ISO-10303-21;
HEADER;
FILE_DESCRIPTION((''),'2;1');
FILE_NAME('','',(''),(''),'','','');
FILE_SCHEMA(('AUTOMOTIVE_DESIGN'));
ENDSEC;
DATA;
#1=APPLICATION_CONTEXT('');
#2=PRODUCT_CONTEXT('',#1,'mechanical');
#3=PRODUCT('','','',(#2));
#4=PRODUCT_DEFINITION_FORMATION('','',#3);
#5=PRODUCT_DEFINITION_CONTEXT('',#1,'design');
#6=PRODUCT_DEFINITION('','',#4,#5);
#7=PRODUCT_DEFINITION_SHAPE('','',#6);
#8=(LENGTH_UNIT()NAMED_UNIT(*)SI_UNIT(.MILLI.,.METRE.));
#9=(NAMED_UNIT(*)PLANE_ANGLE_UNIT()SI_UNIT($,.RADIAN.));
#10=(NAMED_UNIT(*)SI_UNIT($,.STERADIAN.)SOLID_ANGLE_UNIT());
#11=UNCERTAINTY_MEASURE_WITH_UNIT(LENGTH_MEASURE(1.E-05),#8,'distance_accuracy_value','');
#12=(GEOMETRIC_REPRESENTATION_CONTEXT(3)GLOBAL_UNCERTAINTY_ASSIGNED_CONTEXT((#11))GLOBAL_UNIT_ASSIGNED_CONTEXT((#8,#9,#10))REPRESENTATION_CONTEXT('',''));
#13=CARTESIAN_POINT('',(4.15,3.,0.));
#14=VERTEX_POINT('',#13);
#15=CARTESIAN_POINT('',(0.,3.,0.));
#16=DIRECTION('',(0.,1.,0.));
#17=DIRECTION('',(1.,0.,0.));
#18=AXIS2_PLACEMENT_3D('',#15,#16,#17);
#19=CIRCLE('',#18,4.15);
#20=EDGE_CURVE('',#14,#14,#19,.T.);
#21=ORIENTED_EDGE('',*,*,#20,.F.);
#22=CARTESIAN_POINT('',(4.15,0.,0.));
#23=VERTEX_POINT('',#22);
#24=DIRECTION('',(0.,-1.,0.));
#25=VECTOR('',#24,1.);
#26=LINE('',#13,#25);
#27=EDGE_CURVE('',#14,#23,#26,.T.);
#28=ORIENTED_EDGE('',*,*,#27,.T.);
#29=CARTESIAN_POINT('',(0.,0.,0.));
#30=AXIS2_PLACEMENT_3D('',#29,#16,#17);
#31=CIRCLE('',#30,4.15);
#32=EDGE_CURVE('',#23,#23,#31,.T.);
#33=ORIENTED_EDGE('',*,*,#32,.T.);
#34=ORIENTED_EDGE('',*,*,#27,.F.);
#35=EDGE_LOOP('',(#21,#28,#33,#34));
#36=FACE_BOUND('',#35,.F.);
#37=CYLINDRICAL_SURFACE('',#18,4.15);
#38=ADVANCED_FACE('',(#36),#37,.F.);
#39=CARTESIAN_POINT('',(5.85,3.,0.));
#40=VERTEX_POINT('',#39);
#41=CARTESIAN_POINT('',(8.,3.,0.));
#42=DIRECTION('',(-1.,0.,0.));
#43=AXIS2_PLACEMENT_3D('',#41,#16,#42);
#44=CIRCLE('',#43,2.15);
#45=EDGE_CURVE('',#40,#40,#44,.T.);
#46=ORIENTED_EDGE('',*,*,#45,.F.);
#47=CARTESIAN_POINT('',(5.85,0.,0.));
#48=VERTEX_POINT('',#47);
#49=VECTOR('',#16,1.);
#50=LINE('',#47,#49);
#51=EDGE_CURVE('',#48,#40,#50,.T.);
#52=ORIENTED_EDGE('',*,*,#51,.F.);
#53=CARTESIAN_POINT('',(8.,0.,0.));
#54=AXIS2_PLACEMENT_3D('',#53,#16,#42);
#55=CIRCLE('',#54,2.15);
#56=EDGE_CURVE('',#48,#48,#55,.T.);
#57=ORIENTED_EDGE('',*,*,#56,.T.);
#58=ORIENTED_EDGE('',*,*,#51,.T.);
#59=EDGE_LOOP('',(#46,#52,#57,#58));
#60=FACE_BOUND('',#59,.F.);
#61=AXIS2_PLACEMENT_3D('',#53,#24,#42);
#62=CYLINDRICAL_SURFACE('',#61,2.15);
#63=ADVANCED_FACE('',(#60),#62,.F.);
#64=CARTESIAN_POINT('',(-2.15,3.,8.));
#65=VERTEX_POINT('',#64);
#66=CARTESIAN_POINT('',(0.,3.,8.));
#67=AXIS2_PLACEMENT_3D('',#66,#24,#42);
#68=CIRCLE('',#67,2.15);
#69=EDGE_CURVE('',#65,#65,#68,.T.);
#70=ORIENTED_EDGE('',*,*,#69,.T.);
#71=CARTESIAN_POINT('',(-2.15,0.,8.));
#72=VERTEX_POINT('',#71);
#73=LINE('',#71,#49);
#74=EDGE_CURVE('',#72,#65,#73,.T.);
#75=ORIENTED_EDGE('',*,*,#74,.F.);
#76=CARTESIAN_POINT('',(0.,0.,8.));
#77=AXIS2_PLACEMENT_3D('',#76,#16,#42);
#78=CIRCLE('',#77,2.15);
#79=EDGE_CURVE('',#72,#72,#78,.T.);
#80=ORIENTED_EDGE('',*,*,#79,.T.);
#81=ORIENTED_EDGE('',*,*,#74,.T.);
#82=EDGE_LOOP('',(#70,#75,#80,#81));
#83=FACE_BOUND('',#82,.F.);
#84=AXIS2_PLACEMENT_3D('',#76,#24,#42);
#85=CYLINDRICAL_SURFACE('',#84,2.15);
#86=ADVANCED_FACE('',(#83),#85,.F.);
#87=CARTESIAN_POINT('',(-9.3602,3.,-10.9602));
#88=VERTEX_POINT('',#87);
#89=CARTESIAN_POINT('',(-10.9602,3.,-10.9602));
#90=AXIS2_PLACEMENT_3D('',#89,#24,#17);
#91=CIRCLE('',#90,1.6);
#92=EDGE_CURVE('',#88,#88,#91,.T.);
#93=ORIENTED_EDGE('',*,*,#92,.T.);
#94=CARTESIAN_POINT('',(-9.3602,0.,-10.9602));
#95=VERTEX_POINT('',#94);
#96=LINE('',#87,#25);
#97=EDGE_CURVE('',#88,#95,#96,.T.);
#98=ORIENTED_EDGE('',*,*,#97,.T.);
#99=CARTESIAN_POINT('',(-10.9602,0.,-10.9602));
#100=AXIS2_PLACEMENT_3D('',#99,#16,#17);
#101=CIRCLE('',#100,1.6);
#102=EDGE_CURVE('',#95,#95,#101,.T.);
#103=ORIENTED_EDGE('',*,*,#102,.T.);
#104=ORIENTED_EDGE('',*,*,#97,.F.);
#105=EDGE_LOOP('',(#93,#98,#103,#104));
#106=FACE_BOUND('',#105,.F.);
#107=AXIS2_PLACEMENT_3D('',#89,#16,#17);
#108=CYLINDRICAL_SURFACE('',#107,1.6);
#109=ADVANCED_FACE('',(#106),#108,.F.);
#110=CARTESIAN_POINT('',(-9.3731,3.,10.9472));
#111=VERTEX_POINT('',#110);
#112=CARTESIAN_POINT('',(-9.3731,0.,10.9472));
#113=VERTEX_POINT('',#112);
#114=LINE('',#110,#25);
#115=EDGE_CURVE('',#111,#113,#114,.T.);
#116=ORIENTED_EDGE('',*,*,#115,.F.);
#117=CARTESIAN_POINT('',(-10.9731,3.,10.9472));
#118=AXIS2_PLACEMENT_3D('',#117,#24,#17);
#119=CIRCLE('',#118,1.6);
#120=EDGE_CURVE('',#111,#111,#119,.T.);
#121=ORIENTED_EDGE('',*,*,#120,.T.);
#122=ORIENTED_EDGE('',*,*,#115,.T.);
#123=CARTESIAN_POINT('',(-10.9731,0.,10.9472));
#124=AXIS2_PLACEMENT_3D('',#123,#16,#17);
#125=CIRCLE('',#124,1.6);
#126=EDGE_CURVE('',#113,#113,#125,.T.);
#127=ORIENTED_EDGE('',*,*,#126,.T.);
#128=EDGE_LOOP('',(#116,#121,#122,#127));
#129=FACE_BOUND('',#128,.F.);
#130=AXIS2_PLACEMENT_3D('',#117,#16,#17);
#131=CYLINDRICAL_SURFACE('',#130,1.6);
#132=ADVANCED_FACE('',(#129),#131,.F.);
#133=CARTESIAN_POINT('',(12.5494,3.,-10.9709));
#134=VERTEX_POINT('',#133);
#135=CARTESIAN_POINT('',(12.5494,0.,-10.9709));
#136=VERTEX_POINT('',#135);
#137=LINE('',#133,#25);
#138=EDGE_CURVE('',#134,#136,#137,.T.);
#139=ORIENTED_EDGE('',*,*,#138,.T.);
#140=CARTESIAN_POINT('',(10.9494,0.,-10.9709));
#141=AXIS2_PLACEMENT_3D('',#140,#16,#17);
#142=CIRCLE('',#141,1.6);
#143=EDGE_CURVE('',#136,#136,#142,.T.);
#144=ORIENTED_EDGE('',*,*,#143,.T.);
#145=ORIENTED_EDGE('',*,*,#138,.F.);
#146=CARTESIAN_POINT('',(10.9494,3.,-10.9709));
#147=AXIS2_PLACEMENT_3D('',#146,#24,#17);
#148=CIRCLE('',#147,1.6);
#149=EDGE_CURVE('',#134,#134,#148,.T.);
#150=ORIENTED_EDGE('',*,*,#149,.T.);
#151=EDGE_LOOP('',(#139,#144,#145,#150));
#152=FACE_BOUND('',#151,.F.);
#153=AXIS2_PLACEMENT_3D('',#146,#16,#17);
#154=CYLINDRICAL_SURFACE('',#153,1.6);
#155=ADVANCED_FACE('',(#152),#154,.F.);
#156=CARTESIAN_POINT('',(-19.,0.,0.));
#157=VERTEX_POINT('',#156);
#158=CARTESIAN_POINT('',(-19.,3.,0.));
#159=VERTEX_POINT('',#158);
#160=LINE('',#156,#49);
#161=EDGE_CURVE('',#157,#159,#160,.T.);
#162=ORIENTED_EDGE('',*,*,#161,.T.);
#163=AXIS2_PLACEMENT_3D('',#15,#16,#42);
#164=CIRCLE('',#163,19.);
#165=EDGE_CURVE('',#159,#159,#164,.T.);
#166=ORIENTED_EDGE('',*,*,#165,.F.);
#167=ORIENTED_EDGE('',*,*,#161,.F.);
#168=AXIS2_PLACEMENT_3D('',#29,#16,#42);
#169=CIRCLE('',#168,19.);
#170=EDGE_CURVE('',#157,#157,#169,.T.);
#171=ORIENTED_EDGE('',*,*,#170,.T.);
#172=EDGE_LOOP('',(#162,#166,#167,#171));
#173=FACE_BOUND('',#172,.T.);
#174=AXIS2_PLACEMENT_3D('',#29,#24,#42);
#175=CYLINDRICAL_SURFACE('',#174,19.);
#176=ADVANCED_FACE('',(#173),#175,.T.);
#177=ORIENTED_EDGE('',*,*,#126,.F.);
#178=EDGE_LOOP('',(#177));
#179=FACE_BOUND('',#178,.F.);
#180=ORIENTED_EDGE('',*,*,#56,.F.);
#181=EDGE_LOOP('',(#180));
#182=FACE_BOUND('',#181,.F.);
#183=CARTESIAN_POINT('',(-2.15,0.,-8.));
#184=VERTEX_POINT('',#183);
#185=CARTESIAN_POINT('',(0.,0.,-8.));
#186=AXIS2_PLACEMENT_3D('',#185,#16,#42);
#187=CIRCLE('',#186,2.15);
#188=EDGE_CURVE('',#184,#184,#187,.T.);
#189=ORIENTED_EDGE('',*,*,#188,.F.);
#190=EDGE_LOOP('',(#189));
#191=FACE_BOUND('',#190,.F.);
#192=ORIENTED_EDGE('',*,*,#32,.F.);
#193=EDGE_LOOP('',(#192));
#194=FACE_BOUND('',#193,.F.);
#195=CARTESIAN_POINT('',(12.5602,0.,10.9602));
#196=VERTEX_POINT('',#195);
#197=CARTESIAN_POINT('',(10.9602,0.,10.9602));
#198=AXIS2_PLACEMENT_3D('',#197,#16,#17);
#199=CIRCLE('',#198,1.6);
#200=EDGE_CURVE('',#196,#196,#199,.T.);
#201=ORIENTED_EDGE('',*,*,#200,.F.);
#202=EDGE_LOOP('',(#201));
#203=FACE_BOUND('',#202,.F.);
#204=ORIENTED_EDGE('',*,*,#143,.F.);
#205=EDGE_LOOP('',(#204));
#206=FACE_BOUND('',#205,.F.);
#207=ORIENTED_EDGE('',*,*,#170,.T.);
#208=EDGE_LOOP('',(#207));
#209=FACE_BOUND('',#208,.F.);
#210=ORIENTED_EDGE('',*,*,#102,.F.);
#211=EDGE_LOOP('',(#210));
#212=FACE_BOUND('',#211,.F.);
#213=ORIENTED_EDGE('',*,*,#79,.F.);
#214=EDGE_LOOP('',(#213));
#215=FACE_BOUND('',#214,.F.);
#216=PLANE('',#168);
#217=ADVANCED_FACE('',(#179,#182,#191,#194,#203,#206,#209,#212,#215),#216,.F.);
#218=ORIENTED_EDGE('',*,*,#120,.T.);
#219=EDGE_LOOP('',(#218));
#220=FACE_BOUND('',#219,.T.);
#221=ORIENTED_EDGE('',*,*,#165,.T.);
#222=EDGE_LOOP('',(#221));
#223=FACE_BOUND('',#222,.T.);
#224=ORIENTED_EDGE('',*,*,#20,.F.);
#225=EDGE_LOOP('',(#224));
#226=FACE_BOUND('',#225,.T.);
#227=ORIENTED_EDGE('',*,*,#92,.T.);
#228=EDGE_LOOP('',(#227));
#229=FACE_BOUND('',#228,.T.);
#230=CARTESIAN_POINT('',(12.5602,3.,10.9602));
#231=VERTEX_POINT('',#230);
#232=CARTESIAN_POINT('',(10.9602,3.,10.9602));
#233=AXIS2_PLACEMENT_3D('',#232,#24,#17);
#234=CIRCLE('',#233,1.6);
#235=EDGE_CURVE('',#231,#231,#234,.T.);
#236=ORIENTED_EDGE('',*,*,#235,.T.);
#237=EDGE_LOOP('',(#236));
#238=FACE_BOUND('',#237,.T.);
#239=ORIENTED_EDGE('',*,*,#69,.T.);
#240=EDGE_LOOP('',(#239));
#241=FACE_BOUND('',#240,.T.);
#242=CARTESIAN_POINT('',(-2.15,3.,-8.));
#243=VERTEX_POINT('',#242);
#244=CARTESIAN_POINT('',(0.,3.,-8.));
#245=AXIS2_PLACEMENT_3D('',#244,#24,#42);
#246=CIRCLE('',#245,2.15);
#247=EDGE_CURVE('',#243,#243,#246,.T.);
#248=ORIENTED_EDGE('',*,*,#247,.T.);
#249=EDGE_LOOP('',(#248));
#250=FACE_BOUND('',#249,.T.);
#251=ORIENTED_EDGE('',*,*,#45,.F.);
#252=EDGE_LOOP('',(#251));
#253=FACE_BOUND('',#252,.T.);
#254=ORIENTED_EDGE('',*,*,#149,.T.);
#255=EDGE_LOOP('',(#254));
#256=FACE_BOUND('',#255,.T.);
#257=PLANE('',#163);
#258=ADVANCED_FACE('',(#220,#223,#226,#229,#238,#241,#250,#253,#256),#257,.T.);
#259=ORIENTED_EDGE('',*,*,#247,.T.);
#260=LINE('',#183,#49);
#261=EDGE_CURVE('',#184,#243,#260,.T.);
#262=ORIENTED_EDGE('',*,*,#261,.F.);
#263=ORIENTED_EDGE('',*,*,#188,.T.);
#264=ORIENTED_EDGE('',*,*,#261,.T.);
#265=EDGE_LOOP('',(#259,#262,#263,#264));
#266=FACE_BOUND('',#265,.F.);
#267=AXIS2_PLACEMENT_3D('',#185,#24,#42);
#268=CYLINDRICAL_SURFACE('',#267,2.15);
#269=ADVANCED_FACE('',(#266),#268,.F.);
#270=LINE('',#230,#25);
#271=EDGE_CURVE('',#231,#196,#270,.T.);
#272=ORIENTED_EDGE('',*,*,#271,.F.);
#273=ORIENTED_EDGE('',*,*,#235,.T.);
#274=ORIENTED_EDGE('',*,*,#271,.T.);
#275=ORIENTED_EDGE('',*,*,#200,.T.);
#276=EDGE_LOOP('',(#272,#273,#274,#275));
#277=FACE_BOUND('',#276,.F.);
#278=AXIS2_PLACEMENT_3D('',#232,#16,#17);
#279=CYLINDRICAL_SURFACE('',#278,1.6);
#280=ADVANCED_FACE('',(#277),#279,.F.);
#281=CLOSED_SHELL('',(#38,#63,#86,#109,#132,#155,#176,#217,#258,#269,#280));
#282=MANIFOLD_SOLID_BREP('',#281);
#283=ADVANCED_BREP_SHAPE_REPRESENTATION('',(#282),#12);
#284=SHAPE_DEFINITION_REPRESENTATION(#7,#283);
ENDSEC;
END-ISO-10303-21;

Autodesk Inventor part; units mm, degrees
ref_plane "YZ Plane" through (0, 0, 0) normal (1, 0, 0) x (0, 1, 0)
ref_plane "XZ Plane" through (0, 0, 0) normal (0, 1, 0) x (-1, 0, 0)
ref_plane "XY Plane" through (0, 0, 0) normal (0, 0, 1) x (1, 0, 0)
sketch "スケッチ1" plane through (0, 0, 0) normal (0, 1, 0) x (-1, 0, 0)
  circle A0 centre (0, 0) radius 19
  line L0 (0, 0) -> (0, 8)
  line L1 (0, 0) -> (-8, 0)
  line L2 (0, 0) -> (0, -8)
  circle A1 centre (0, -8) radius 2.15
  circle A2 centre (0, 8) radius 2.15
  circle A3 centre (-8, 0) radius 2.15
  dimension "d0" = 38
  dimension "d1" = 8
  dimension "d2" = 8
  dimension "d4" = 8
  dimension "d5" = 4.3
  dimension "d6" = 4.3
  dimension "d7" = 4.3
extrude "押し出し1" add sketch "スケッチ1" along normal blind 3
sketch "スケッチ3" plane through (0, 3, 0) normal (0, 1, 0) x (1, 0, 0)
  circle A0 centre (0, 0) radius 4.15
  dimension "d24" = 8.3
extrude "押し出し3" cut sketch "スケッチ3" against normal blind 10
sketch "スケッチ4" plane through (0, 3, 0) normal (0, 1, 0) x (1, 0, 0)
  line L0 (0, 0) -> (-10.9602, 10.9602)
  line L1 (0, 0) -> (15.5, 0) construction
  circle A0 centre (-10.9602, 10.9602) radius 1.6
  line L2 (0, 0) -> (10.9494, 10.9709)
  circle A1 centre (10.9494, 10.9709) radius 1.6
  line L3 (0, 0) -> (-10.9731, -10.9472)
  circle A2 centre (-10.9731, -10.9472) radius 1.6
  line L4 (0, 0) -> (10.9602, -10.9602)
  line L5 (0, 0) -> (15.5, 0) construction
  circle A3 centre (10.9602, -10.9602) radius 1.6
  circle A4 centre (0, 0) radius 12.5
  dimension "d27" = 15.5
  dimension "d28" = 135
  dimension "d29" = 3.2
  dimension "d30" = 15.5
  dimension "d31" = 3.2
  dimension "d32" = 15.5
  dimension "d33" = 3.2
  dimension "d34" = 15.5
  dimension "d35" = 45
  dimension "d36" = 3.2
  dimension "d37" = 25
extrude "押し出し4" cut sketch "スケッチ4" against normal blind 10 contours A0 | A1 | A2 | A3
properties part number "フランジ"
